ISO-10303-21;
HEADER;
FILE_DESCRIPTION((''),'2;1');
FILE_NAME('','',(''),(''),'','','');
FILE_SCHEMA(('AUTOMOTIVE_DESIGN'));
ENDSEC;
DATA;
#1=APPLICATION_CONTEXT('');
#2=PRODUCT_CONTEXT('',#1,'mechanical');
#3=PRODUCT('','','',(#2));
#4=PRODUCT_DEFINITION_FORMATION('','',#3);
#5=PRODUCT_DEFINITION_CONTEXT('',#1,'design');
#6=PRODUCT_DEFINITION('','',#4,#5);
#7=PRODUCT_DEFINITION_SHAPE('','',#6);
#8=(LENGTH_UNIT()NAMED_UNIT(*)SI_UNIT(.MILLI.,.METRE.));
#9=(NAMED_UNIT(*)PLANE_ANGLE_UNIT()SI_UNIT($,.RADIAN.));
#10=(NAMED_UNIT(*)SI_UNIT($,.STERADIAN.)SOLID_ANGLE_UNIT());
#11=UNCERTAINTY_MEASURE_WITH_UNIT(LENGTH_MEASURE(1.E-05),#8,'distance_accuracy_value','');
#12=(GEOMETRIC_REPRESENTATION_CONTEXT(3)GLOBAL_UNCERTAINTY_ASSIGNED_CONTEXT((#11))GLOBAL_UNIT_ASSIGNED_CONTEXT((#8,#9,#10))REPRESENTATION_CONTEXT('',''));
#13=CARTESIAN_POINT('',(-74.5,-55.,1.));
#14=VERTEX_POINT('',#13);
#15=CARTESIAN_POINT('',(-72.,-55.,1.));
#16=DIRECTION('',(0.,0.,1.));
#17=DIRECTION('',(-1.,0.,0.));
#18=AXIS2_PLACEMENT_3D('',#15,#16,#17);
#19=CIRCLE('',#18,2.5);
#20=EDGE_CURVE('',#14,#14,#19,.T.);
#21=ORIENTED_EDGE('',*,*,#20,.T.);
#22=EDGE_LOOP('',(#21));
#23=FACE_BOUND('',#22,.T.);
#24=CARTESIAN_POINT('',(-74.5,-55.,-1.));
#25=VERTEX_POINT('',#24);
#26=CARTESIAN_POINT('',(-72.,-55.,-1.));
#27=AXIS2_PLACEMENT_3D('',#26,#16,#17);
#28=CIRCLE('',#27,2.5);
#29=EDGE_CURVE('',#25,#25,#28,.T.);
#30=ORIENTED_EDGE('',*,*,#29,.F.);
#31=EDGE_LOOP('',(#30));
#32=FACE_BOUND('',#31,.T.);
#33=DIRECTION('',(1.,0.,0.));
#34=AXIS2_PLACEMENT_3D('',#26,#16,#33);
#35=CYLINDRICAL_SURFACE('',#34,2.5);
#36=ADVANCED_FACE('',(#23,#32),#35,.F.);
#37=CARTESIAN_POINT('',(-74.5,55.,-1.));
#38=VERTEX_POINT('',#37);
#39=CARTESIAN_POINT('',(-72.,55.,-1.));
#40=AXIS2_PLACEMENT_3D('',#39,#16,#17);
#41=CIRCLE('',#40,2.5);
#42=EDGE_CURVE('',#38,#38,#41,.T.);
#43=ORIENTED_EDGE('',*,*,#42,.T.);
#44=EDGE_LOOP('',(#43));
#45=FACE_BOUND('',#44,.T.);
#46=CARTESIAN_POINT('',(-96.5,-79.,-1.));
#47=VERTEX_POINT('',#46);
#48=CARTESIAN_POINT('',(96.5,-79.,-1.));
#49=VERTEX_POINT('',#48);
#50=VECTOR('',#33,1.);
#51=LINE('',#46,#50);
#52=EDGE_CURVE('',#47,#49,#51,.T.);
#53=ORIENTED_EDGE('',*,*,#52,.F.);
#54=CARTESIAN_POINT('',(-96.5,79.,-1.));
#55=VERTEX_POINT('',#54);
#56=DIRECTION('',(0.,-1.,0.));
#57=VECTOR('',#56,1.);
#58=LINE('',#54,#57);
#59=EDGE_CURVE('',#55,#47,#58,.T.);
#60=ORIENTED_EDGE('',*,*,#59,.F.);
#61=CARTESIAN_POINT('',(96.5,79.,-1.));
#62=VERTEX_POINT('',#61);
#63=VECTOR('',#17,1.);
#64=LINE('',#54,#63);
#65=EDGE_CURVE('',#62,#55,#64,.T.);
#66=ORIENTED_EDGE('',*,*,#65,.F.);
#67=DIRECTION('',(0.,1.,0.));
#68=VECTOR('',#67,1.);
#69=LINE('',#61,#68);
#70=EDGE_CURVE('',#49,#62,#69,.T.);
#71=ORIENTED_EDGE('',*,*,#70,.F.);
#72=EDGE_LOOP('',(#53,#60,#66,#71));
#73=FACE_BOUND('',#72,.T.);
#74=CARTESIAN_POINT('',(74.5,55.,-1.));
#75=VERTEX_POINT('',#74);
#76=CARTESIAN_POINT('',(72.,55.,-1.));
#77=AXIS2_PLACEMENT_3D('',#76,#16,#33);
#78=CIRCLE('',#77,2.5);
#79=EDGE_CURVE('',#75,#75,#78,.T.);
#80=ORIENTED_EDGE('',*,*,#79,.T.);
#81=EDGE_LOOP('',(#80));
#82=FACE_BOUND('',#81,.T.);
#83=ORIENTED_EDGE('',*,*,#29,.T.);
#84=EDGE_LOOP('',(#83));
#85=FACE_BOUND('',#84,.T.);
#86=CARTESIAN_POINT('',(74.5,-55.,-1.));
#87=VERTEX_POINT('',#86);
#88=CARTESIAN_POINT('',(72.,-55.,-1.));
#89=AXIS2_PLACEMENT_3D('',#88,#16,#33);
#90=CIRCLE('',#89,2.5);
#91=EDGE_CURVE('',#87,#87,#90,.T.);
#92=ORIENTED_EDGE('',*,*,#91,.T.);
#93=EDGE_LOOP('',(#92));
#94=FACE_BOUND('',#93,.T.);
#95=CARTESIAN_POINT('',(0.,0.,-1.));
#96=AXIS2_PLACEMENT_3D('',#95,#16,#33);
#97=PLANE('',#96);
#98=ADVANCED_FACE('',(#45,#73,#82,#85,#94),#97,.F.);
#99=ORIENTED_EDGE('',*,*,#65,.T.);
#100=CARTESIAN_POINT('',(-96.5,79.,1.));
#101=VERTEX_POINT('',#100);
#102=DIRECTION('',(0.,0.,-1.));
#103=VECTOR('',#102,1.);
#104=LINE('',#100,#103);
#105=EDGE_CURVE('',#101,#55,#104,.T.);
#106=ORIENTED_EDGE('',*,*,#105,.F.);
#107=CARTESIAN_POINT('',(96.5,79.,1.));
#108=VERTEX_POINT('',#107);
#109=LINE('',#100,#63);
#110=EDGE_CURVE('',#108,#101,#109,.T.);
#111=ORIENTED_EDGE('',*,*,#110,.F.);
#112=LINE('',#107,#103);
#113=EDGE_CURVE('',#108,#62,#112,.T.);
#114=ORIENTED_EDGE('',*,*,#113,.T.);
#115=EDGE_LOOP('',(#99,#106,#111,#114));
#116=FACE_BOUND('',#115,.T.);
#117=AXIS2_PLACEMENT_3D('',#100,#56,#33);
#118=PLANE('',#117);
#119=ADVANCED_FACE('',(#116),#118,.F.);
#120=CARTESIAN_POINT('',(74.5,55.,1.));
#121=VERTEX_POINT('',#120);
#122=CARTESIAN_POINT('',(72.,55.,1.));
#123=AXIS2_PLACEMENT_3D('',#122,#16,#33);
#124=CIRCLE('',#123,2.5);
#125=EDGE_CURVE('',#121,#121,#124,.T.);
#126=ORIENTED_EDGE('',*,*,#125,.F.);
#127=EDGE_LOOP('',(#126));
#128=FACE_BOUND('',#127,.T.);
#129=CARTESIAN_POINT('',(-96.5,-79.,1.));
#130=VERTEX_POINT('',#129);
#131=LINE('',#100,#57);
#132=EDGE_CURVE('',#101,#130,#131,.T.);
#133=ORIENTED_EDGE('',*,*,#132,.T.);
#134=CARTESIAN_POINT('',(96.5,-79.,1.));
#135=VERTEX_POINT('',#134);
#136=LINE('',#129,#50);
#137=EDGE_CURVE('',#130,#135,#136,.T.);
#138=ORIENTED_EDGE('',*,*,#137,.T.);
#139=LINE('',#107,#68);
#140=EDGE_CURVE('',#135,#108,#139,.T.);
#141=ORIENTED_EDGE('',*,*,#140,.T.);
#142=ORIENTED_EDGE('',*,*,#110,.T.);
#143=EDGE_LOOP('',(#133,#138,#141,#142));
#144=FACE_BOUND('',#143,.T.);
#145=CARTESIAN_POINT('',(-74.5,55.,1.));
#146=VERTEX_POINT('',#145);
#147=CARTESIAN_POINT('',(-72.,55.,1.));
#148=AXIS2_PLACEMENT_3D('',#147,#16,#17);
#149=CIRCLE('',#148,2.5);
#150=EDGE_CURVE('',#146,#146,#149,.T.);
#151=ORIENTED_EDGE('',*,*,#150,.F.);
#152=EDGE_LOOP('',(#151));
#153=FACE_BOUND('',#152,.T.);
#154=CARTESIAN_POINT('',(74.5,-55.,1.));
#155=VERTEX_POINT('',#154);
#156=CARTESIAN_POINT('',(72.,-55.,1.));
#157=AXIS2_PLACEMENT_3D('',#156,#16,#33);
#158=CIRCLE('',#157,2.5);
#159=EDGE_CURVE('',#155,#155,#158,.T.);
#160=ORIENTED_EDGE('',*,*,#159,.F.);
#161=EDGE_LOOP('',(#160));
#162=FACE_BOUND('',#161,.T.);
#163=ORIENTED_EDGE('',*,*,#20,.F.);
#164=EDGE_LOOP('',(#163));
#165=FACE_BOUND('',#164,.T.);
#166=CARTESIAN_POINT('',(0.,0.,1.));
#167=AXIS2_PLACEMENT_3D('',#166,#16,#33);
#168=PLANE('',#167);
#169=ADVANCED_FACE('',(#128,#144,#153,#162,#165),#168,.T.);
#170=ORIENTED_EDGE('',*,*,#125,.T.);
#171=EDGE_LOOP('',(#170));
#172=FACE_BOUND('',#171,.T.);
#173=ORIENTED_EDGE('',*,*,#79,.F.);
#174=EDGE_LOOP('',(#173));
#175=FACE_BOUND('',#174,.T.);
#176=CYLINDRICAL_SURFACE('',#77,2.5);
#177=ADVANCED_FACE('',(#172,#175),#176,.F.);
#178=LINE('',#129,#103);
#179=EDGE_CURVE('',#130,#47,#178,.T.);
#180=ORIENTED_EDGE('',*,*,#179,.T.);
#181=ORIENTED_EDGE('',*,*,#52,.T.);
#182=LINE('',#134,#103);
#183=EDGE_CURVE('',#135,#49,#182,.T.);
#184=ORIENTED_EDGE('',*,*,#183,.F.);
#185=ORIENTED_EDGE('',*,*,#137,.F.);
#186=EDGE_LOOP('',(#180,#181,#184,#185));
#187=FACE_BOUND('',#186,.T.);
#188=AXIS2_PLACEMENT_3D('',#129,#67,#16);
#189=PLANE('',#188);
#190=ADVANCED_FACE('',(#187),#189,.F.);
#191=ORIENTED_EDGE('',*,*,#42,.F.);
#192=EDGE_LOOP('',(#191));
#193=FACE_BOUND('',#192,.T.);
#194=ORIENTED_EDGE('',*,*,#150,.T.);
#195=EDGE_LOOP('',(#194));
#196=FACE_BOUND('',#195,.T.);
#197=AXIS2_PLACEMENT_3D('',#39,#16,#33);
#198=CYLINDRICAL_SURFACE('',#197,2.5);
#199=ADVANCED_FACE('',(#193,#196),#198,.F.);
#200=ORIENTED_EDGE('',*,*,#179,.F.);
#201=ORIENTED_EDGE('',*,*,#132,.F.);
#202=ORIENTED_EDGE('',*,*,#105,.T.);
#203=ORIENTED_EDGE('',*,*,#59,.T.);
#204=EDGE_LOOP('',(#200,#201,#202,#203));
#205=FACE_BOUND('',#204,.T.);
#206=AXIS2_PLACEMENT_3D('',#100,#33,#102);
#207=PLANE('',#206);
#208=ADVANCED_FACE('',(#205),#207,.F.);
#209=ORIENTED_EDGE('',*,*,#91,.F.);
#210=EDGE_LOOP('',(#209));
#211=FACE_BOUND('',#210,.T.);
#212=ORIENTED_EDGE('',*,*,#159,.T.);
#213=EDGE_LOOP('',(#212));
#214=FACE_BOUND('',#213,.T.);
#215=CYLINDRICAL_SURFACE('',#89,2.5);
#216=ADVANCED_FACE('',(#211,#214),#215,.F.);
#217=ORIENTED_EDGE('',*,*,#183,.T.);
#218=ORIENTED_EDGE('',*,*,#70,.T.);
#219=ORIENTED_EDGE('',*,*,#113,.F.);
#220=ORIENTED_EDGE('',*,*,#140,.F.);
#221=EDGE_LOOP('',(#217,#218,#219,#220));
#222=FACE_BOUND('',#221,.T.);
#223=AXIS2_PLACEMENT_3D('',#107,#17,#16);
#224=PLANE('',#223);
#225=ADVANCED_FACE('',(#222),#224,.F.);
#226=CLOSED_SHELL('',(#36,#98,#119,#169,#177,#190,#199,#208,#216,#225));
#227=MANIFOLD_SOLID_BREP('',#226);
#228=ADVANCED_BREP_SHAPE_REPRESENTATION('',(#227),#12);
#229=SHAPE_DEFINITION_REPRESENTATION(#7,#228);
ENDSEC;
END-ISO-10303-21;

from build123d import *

# Parameters (mm, degrees)
SKETCH1_R             = 3
BOSS_EXTRUDE1_DEPTH   = 1
BOSS_EXTRUDE1_2_DEPTH = 1
BOSS_EXTRUDE1_3_DEPTH = 1
BOSS_EXTRUDE1_4_DEPTH = 1
SKETCH1_W             = 193
SKETCH1_H             = 158
BOSS_EXTRUDE1_5_DEPTH = 1
DELETEFACE1_START     = -1
DELETEFACE1_OUTLINE_R = 3
DELETEFACE1_DEPTH     = 2
SKETCH3_R             = 2.5
CUT_EXTRUDE2_DEPTH    = 384.236219583


with BuildPart() as part:
    # Sketch1 → Boss-Extrude1 (new, symmetric)
    with BuildSketch(Plane.XY):
        with Locations((-372, 55)):
            Circle(SKETCH1_R)
    extrude(amount=BOSS_EXTRUDE1_DEPTH, both=True)


with BuildPart() as body_2:
    # Sketch1 → Boss-Extrude1 2 (new, symmetric)
    with BuildSketch(Plane.XY):
        with Locations(Location((-372, -55, 0), (0, 0, 180))):
            Circle(SKETCH1_R)
    extrude(amount=BOSS_EXTRUDE1_2_DEPTH, both=True)


with BuildPart() as body_3:
    # Sketch1 → Boss-Extrude1 3 (new, symmetric)
    with BuildSketch(Plane.XY):
        with Locations((372, -55)):
            Circle(SKETCH1_R)
    extrude(amount=BOSS_EXTRUDE1_3_DEPTH, both=True)


with BuildPart() as body_4:
    # Sketch1 → Boss-Extrude1 4 (new, symmetric)
    with BuildSketch(Plane.XY):
        with Locations(Location((372, 55, 0), (0, 0, 180))):
            Circle(SKETCH1_R)
    extrude(amount=BOSS_EXTRUDE1_4_DEPTH, both=True)


with BuildPart() as body_5:
    # Sketch1 → Boss-Extrude1 5 (new, symmetric)
    with BuildSketch(Plane.XY):
        Rectangle(SKETCH1_W, SKETCH1_H)
        with Locations((0, 55)):
            Circle(SKETCH1_R, mode=Mode.SUBTRACT)
        with Locations(Location((0, -55, 0), (0, 0, 180))):
            Circle(SKETCH1_R, mode=Mode.SUBTRACT)
    extrude(amount=BOSS_EXTRUDE1_5_DEPTH, both=True)

    # DeleteFace1: read off the stored shape, not the designer's step
    # DeleteFace1 outline → DeleteFace1 (add)
    with BuildSketch(Plane.XY.offset(DELETEFACE1_START)):
        with Locations((0, 55)):
            Circle(DELETEFACE1_OUTLINE_R)
        with Locations((0, -55)):
            Circle(DELETEFACE1_OUTLINE_R)
    extrude(amount=DELETEFACE1_DEPTH)

    # Sketch3 → Cut-Extrude2 (cut, through all)
    with BuildSketch(Plane.XY.offset(1)):
        with Locations(Location((-72, 55, 0), (0, 0, 180))):
            Circle(SKETCH3_R)
        with Locations((72, -55)):
            Circle(SKETCH3_R)
        with Locations((72, 55)):
            Circle(SKETCH3_R)
        with Locations(Location((-72, -55, 0), (0, 0, 180))):
            Circle(SKETCH3_R)
    extrude(amount=-CUT_EXTRUDE2_DEPTH, mode=Mode.SUBTRACT)


solid = body_5.part
